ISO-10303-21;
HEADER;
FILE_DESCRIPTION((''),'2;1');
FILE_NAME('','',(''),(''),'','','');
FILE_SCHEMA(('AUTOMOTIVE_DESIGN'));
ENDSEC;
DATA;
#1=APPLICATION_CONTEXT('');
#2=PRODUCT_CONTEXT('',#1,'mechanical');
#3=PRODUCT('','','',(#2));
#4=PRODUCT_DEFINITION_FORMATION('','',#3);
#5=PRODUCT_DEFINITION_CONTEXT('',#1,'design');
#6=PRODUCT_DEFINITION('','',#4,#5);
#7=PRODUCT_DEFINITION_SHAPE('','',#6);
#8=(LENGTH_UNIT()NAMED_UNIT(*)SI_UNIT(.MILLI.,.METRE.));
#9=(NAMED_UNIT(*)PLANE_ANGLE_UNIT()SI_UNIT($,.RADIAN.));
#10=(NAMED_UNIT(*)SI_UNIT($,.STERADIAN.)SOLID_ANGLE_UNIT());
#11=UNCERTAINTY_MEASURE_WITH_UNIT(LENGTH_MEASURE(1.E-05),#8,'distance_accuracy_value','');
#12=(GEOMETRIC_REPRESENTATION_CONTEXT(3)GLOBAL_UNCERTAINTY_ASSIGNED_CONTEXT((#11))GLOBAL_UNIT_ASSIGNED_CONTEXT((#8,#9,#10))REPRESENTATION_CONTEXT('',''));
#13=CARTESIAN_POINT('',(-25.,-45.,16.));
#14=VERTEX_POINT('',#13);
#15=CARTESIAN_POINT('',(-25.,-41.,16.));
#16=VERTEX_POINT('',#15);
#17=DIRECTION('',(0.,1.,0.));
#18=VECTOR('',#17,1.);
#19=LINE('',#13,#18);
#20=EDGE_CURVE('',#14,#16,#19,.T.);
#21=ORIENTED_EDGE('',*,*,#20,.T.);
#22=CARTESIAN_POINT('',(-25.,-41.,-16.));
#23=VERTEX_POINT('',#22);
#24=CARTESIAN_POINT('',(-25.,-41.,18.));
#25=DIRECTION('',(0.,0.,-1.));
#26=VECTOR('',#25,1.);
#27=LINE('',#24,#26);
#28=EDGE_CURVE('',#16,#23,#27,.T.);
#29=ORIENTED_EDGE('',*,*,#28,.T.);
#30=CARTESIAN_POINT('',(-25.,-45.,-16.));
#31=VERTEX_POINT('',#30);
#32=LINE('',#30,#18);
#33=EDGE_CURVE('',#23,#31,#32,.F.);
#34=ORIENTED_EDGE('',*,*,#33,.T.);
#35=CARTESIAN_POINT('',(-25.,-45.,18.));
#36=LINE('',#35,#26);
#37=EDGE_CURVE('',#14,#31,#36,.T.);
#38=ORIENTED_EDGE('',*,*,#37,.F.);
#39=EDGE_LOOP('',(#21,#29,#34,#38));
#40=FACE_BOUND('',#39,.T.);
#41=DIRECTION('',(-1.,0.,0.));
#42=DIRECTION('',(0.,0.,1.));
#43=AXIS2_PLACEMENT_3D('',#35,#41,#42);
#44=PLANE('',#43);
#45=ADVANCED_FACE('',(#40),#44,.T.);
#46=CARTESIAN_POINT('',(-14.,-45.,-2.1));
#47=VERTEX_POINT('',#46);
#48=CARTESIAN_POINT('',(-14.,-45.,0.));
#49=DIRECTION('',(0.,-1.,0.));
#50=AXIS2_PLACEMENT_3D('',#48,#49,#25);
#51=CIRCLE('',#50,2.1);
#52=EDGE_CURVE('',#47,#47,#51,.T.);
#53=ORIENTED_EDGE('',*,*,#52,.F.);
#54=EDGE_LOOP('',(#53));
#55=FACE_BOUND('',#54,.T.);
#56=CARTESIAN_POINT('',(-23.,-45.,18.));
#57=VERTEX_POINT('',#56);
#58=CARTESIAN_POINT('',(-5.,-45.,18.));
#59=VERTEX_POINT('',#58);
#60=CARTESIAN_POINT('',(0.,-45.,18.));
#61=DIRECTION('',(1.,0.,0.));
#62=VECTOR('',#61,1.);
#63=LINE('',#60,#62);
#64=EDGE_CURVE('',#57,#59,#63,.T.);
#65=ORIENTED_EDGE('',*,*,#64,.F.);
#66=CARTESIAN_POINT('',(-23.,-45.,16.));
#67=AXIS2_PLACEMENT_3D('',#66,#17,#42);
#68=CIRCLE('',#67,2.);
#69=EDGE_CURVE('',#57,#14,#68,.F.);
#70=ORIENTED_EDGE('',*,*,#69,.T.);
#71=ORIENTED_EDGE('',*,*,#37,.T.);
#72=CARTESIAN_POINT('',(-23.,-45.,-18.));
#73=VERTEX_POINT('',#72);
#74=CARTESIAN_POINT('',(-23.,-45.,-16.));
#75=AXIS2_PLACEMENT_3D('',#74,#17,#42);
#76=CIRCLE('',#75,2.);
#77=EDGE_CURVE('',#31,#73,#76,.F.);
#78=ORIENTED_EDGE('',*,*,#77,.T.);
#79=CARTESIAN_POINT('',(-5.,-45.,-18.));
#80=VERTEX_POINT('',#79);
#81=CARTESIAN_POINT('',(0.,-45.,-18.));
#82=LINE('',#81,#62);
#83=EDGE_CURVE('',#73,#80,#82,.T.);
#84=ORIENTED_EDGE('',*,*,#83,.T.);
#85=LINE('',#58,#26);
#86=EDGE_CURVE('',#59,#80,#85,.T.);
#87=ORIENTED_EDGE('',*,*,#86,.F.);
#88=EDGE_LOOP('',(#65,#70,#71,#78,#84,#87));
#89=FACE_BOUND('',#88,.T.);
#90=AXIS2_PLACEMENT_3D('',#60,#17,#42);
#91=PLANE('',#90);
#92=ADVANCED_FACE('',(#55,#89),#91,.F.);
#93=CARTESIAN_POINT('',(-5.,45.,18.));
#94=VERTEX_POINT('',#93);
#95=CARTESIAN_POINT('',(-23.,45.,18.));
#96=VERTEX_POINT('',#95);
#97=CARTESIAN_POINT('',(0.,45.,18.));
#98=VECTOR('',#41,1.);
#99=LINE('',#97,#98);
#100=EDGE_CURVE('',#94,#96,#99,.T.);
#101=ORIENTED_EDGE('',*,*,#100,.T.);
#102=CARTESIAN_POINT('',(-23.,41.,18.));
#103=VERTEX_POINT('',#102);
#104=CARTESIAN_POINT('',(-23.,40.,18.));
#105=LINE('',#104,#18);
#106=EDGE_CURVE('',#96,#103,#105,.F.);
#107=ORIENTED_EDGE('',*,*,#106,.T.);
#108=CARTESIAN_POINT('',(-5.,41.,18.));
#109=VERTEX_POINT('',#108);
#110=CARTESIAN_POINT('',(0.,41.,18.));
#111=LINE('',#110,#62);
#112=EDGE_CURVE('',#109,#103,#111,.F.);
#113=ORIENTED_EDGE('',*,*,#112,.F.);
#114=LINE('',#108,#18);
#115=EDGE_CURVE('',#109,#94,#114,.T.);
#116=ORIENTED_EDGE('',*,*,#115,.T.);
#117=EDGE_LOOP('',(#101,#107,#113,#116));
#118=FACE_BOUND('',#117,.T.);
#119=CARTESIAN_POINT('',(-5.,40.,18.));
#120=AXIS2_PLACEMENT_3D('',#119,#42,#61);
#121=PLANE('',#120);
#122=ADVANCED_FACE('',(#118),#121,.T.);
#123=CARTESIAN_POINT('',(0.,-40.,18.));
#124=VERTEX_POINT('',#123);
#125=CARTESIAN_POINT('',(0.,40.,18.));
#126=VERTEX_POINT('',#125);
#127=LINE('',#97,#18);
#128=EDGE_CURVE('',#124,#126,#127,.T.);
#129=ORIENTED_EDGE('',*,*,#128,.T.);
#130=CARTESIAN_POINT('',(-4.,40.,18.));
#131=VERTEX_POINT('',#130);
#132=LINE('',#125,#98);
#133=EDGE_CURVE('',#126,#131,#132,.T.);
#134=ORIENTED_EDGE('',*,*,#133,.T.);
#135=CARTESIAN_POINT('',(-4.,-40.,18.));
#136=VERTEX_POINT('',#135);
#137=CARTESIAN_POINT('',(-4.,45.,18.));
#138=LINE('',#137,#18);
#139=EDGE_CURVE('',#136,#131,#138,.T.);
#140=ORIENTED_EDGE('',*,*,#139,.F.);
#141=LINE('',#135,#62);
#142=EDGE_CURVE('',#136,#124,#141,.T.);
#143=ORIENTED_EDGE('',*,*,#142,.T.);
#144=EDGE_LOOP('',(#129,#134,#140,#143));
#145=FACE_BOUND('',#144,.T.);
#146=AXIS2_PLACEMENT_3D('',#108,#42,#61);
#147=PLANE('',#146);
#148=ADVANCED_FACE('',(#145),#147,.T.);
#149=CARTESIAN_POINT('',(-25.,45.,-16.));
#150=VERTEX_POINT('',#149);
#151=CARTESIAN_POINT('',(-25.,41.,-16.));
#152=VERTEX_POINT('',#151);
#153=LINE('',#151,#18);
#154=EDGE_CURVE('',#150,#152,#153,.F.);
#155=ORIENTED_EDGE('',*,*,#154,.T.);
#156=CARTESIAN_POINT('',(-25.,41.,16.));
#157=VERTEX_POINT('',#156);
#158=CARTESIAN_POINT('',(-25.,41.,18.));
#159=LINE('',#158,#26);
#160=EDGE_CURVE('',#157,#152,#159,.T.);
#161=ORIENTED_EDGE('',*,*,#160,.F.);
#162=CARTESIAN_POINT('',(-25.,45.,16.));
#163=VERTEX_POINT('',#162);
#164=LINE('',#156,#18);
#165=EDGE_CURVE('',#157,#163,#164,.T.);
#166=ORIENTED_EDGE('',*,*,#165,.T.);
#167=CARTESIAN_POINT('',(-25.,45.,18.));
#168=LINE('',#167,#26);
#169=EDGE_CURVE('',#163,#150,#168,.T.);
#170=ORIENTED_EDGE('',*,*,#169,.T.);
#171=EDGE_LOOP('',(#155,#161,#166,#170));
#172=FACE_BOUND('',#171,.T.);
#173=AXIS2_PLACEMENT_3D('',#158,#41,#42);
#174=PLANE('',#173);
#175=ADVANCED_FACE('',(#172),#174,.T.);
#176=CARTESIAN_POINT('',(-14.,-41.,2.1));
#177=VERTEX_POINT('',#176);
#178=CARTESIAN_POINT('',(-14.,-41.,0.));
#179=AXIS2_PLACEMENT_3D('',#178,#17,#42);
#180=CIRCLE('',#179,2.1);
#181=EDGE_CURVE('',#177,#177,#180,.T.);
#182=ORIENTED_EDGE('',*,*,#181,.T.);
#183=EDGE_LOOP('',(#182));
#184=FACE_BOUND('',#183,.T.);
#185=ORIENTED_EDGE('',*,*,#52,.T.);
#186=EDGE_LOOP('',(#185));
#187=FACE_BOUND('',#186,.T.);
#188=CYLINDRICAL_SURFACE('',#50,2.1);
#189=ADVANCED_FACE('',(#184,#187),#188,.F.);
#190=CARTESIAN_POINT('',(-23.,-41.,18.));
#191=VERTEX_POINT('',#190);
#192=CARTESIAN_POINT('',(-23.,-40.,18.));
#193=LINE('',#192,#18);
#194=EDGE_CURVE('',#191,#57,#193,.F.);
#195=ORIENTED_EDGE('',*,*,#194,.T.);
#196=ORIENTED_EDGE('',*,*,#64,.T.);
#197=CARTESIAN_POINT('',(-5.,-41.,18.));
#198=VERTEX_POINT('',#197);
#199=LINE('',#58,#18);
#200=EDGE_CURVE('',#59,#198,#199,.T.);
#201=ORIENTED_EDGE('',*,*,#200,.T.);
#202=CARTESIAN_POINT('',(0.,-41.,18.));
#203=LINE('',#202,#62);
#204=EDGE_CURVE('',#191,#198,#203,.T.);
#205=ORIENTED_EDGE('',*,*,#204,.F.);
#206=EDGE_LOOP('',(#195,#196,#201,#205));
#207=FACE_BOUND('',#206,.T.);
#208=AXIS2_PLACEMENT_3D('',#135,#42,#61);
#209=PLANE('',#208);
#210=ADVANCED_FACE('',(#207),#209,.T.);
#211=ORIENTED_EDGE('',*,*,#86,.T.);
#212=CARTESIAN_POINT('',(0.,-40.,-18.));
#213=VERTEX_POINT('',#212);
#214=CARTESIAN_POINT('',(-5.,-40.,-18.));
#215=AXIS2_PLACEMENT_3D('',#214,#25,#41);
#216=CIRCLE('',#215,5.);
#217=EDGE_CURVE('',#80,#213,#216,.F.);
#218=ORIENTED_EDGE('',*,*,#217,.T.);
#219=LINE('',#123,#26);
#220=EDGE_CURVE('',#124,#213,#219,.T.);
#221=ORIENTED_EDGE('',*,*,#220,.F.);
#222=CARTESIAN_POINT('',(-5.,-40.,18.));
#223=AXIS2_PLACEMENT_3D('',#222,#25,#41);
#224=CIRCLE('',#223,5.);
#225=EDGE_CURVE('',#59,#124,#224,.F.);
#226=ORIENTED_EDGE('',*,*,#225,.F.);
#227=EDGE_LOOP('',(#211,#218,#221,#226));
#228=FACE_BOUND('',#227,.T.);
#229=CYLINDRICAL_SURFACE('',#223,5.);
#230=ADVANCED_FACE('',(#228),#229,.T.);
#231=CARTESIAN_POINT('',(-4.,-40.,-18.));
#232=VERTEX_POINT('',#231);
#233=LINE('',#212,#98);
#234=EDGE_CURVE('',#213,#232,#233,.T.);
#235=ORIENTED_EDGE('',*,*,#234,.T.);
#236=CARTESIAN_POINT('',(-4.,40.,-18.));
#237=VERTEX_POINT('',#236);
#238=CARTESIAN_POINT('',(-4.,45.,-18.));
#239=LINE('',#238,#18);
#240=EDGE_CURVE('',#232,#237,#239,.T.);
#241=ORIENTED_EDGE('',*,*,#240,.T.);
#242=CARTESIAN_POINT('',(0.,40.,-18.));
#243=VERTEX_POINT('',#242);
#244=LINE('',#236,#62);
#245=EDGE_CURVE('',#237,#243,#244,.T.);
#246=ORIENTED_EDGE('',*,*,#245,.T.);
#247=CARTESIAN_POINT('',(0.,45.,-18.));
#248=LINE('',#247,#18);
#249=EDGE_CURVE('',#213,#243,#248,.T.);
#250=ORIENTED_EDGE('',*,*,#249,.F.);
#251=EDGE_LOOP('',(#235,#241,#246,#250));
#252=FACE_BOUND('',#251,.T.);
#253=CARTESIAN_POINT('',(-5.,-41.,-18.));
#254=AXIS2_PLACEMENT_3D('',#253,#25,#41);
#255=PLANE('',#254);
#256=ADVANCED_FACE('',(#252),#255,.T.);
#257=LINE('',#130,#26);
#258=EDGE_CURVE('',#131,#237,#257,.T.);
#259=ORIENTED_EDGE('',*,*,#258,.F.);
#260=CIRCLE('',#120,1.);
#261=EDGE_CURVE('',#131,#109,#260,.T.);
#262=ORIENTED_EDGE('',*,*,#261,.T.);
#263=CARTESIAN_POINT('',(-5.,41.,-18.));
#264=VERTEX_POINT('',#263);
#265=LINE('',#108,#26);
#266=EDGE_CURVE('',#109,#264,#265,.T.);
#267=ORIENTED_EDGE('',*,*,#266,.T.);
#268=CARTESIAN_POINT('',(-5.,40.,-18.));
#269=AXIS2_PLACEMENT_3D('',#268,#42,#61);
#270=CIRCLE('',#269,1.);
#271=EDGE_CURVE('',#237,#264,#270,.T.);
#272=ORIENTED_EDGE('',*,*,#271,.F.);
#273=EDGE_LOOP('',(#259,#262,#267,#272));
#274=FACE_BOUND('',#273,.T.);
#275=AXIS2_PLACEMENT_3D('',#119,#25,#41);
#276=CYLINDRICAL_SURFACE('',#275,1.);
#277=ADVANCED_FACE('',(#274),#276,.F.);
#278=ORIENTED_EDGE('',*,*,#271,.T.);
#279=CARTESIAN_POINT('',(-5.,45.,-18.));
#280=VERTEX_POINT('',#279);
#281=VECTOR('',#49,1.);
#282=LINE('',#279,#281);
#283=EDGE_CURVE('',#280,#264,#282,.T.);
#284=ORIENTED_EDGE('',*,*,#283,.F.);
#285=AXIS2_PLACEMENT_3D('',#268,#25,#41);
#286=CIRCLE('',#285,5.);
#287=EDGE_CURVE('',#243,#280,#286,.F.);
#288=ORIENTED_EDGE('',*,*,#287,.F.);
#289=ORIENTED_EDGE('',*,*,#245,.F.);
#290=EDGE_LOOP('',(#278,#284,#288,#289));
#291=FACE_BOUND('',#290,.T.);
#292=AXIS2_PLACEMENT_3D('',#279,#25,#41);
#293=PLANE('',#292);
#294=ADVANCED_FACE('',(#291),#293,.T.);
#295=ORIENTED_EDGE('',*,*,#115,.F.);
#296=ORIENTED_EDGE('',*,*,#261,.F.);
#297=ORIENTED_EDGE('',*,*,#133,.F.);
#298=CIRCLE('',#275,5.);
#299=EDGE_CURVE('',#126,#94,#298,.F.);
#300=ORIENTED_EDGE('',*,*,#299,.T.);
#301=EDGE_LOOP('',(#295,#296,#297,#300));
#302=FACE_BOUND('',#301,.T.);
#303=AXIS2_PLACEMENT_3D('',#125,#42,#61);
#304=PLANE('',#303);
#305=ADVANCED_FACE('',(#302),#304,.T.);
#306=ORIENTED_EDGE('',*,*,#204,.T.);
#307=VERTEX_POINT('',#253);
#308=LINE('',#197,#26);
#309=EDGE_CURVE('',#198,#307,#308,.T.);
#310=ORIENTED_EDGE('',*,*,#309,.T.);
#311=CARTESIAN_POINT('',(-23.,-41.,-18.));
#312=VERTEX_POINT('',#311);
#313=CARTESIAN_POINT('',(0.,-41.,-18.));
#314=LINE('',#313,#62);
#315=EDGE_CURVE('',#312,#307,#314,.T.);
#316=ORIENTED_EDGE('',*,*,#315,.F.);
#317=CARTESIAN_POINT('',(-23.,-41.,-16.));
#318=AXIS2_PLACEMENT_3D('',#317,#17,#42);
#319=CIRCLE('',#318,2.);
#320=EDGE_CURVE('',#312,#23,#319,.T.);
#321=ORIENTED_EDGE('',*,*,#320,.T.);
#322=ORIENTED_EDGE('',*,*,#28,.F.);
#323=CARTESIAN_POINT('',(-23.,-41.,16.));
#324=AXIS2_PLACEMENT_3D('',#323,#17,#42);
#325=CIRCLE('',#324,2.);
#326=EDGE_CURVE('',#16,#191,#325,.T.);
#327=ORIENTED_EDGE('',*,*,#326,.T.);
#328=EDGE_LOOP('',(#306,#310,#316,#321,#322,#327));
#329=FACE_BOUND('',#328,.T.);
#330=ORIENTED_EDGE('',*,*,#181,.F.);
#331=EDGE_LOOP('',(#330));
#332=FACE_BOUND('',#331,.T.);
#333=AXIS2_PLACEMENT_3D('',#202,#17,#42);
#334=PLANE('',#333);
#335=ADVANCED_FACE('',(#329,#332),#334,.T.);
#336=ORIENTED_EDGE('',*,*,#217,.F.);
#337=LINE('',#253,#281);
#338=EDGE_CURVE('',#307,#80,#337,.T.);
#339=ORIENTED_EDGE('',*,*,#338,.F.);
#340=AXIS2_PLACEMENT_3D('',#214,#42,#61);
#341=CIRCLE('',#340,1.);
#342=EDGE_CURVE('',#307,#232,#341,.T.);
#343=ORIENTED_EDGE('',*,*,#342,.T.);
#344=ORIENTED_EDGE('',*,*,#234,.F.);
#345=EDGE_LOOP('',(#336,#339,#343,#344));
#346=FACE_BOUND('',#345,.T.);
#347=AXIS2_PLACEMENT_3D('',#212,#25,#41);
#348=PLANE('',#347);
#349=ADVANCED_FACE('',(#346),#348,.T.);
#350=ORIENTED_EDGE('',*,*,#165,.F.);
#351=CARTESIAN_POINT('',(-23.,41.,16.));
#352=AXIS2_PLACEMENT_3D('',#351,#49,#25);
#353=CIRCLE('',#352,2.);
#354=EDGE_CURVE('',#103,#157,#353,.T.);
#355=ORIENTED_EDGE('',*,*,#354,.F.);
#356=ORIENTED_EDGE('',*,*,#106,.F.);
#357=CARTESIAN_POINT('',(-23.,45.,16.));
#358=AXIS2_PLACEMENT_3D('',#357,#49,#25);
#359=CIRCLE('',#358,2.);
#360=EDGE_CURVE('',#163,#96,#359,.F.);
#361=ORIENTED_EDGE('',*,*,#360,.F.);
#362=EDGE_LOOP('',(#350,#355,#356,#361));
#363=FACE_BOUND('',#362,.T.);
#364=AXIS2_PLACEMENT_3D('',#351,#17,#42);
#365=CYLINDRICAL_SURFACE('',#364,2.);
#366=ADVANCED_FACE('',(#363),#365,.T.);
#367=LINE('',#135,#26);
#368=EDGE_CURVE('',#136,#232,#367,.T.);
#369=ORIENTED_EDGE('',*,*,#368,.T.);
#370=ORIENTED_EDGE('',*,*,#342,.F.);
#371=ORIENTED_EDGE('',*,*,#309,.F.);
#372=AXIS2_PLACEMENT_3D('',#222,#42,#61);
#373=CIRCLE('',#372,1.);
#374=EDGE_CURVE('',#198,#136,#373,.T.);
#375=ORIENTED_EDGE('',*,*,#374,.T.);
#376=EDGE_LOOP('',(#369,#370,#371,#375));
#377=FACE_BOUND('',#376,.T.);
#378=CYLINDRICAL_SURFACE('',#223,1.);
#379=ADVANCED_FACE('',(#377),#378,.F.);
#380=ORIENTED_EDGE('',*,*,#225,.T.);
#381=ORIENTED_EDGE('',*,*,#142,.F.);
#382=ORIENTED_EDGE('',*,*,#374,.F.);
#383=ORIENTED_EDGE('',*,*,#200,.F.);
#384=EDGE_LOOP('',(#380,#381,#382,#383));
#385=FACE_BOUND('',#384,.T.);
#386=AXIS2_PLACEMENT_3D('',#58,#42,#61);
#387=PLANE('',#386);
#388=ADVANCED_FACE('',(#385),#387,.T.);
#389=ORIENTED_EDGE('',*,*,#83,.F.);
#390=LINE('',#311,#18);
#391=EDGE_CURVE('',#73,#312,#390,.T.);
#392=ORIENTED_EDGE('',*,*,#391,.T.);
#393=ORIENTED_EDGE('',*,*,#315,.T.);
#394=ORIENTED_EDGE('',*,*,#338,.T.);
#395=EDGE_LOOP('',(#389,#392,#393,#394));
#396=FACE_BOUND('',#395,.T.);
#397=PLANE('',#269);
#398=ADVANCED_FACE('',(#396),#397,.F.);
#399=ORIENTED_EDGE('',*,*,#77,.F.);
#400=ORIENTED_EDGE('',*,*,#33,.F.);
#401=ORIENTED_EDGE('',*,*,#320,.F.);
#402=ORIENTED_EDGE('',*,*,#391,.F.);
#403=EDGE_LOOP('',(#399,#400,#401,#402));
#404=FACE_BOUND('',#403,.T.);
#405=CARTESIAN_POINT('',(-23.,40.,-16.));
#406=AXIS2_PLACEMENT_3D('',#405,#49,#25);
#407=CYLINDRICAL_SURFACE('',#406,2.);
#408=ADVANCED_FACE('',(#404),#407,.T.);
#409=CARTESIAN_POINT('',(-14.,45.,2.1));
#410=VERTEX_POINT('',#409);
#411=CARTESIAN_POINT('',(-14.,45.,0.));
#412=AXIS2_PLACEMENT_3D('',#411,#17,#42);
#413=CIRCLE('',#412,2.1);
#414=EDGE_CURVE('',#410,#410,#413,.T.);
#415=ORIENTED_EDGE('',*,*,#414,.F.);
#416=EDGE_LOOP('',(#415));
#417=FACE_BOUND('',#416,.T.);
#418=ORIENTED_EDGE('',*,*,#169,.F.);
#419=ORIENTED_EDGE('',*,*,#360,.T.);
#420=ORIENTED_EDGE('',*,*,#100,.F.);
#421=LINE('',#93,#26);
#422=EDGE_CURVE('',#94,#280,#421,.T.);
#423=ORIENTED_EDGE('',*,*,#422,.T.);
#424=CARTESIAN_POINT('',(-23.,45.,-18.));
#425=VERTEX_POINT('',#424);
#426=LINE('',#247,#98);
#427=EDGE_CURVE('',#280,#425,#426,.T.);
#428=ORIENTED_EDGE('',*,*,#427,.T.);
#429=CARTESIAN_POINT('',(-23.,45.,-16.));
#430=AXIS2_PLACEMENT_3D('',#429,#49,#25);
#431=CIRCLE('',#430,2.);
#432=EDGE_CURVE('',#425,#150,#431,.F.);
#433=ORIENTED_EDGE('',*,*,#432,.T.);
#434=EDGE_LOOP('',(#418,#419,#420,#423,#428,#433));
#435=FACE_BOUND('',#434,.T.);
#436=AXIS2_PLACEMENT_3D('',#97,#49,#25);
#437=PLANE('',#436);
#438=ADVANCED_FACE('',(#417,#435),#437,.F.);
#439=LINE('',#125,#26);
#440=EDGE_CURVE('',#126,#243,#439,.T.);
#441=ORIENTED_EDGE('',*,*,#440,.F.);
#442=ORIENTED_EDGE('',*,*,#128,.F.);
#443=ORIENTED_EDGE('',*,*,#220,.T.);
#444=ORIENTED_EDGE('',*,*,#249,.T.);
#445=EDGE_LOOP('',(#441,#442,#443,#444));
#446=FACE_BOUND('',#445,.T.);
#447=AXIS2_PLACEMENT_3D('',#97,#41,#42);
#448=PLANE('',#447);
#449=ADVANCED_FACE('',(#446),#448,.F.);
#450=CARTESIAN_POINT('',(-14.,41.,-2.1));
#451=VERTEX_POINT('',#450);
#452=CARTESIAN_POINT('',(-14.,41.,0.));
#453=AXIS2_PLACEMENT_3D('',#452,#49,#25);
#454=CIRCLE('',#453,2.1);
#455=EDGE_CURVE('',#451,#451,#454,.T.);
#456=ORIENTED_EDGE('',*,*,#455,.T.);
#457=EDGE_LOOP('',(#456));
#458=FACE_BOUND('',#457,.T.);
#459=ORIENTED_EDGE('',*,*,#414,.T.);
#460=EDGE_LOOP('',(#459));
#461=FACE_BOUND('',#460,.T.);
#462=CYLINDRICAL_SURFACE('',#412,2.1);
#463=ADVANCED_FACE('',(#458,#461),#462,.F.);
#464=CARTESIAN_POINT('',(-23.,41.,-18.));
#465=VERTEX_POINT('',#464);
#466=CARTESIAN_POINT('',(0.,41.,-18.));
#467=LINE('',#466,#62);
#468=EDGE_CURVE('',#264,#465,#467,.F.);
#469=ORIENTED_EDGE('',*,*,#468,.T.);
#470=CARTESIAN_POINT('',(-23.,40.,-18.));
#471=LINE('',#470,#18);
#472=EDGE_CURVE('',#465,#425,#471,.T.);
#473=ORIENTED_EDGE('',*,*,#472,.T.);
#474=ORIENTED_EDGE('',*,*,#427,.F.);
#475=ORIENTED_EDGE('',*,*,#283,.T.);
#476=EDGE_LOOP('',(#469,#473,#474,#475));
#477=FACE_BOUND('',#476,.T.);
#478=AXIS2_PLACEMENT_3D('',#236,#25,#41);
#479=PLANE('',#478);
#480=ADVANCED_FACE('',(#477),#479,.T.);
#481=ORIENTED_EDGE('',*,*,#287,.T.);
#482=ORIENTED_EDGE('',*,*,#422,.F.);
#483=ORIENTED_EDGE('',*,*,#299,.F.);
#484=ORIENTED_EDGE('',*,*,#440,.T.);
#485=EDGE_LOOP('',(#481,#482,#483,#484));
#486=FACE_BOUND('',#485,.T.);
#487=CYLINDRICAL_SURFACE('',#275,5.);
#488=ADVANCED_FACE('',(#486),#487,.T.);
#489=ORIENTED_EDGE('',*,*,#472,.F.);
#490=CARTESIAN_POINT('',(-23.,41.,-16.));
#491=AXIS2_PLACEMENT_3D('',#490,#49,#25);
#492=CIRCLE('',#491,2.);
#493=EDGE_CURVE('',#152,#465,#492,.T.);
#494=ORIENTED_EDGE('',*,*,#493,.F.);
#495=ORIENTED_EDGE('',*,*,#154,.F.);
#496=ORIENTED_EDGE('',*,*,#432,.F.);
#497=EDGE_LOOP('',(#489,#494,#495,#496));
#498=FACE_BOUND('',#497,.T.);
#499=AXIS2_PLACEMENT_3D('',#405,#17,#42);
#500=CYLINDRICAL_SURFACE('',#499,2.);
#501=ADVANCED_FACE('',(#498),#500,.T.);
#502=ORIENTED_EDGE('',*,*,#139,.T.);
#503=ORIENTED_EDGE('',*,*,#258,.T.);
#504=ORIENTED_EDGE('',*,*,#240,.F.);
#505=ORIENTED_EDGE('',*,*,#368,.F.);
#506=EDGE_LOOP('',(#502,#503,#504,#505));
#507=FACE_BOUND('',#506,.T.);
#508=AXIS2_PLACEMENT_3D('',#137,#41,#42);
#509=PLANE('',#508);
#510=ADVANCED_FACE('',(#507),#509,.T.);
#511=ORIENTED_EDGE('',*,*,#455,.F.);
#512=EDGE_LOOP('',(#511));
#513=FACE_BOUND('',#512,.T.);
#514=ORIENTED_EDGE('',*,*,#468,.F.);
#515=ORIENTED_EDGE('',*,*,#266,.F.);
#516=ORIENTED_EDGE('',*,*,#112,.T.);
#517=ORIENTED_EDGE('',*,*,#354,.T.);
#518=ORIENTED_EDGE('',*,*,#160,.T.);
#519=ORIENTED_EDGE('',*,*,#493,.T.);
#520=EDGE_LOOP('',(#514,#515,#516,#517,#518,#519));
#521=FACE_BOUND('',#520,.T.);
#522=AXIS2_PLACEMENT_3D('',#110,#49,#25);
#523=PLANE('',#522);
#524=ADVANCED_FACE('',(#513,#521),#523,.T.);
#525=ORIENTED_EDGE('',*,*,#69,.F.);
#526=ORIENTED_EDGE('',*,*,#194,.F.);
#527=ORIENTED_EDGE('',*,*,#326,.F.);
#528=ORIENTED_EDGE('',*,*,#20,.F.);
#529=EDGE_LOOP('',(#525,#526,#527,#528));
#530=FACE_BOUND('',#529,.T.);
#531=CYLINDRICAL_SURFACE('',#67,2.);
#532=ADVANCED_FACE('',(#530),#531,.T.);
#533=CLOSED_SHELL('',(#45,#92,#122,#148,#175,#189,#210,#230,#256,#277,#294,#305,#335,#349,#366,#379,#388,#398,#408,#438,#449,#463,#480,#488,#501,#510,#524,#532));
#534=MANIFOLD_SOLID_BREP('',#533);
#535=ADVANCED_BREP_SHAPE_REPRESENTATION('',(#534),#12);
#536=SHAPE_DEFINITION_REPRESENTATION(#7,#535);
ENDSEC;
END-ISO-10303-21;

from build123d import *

# Parameters (mm, degrees)
BASE_FLANGE1_START    = -18
BASE_FLANGE1_DEPTH    = 36
FILLET1_R             = 2
M5_TAPPED_HOLE1_D     = 4.2
M5_TAPPED_HOLE1_DEPTH = 4


# Read off the part's stored shape, not the designer's step: Base-Flange1
with BuildPart() as part:
    # Base-Flange1 outline → Base-Flange1 (new body)
    with BuildSketch(Plane.XY.offset(BASE_FLANGE1_START)):
        with BuildLine():
            Line((-5, 45), (-25, 45))
            Line((-25, 45), (-25, 41))
            Line((-25, 41), (-5, 41))
            ThreePointArc((-5, 41), (-4.292893219, 40.707106781), (-4, 40))
            Line((-4, 40), (-4, -40))
            ThreePointArc((-4, -40), (-4.292893219, -40.707106781), (-5, -41))
            Line((-5, -41), (-25, -41))
            Line((-25, -41), (-25, -45))
            Line((-25, -45), (-5, -45))
            ThreePointArc((-5, -45), (-1.464466094, -43.535533906), (0, -40))
            Line((0, -40), (0, 40))
            ThreePointArc((0, 40), (-1.464466094, 43.535533906), (-5, 45))
        make_face()
    extrude(amount=BASE_FLANGE1_DEPTH)

    # Fillet1
    fillet1_edges = [part.edges().sort_by_distance(p)[0] for p in [
        (-25, -43, -18),
        (-25, 43, -18),
        (-25, -43, 18),
        (-25, 43, 18),
    ]]
    fillet(fillet1_edges, radius=FILLET1_R)

    # M5 Tapped Hole1
    with Locations(Plane(origin=(0, 45, 0), x_dir=(1, 0, 0), z_dir=(0, 1, 0))):
        with Locations((-14, 0)):
            m5_tapped_hole1 = Hole(M5_TAPPED_HOLE1_D / 2, depth=M5_TAPPED_HOLE1_DEPTH)

    # Mirror1: M5 Tapped Hole1 across plane
    add(m5_tapped_hole1.mirror(Plane.ZX), mode=Mode.SUBTRACT)


solid = part.part
